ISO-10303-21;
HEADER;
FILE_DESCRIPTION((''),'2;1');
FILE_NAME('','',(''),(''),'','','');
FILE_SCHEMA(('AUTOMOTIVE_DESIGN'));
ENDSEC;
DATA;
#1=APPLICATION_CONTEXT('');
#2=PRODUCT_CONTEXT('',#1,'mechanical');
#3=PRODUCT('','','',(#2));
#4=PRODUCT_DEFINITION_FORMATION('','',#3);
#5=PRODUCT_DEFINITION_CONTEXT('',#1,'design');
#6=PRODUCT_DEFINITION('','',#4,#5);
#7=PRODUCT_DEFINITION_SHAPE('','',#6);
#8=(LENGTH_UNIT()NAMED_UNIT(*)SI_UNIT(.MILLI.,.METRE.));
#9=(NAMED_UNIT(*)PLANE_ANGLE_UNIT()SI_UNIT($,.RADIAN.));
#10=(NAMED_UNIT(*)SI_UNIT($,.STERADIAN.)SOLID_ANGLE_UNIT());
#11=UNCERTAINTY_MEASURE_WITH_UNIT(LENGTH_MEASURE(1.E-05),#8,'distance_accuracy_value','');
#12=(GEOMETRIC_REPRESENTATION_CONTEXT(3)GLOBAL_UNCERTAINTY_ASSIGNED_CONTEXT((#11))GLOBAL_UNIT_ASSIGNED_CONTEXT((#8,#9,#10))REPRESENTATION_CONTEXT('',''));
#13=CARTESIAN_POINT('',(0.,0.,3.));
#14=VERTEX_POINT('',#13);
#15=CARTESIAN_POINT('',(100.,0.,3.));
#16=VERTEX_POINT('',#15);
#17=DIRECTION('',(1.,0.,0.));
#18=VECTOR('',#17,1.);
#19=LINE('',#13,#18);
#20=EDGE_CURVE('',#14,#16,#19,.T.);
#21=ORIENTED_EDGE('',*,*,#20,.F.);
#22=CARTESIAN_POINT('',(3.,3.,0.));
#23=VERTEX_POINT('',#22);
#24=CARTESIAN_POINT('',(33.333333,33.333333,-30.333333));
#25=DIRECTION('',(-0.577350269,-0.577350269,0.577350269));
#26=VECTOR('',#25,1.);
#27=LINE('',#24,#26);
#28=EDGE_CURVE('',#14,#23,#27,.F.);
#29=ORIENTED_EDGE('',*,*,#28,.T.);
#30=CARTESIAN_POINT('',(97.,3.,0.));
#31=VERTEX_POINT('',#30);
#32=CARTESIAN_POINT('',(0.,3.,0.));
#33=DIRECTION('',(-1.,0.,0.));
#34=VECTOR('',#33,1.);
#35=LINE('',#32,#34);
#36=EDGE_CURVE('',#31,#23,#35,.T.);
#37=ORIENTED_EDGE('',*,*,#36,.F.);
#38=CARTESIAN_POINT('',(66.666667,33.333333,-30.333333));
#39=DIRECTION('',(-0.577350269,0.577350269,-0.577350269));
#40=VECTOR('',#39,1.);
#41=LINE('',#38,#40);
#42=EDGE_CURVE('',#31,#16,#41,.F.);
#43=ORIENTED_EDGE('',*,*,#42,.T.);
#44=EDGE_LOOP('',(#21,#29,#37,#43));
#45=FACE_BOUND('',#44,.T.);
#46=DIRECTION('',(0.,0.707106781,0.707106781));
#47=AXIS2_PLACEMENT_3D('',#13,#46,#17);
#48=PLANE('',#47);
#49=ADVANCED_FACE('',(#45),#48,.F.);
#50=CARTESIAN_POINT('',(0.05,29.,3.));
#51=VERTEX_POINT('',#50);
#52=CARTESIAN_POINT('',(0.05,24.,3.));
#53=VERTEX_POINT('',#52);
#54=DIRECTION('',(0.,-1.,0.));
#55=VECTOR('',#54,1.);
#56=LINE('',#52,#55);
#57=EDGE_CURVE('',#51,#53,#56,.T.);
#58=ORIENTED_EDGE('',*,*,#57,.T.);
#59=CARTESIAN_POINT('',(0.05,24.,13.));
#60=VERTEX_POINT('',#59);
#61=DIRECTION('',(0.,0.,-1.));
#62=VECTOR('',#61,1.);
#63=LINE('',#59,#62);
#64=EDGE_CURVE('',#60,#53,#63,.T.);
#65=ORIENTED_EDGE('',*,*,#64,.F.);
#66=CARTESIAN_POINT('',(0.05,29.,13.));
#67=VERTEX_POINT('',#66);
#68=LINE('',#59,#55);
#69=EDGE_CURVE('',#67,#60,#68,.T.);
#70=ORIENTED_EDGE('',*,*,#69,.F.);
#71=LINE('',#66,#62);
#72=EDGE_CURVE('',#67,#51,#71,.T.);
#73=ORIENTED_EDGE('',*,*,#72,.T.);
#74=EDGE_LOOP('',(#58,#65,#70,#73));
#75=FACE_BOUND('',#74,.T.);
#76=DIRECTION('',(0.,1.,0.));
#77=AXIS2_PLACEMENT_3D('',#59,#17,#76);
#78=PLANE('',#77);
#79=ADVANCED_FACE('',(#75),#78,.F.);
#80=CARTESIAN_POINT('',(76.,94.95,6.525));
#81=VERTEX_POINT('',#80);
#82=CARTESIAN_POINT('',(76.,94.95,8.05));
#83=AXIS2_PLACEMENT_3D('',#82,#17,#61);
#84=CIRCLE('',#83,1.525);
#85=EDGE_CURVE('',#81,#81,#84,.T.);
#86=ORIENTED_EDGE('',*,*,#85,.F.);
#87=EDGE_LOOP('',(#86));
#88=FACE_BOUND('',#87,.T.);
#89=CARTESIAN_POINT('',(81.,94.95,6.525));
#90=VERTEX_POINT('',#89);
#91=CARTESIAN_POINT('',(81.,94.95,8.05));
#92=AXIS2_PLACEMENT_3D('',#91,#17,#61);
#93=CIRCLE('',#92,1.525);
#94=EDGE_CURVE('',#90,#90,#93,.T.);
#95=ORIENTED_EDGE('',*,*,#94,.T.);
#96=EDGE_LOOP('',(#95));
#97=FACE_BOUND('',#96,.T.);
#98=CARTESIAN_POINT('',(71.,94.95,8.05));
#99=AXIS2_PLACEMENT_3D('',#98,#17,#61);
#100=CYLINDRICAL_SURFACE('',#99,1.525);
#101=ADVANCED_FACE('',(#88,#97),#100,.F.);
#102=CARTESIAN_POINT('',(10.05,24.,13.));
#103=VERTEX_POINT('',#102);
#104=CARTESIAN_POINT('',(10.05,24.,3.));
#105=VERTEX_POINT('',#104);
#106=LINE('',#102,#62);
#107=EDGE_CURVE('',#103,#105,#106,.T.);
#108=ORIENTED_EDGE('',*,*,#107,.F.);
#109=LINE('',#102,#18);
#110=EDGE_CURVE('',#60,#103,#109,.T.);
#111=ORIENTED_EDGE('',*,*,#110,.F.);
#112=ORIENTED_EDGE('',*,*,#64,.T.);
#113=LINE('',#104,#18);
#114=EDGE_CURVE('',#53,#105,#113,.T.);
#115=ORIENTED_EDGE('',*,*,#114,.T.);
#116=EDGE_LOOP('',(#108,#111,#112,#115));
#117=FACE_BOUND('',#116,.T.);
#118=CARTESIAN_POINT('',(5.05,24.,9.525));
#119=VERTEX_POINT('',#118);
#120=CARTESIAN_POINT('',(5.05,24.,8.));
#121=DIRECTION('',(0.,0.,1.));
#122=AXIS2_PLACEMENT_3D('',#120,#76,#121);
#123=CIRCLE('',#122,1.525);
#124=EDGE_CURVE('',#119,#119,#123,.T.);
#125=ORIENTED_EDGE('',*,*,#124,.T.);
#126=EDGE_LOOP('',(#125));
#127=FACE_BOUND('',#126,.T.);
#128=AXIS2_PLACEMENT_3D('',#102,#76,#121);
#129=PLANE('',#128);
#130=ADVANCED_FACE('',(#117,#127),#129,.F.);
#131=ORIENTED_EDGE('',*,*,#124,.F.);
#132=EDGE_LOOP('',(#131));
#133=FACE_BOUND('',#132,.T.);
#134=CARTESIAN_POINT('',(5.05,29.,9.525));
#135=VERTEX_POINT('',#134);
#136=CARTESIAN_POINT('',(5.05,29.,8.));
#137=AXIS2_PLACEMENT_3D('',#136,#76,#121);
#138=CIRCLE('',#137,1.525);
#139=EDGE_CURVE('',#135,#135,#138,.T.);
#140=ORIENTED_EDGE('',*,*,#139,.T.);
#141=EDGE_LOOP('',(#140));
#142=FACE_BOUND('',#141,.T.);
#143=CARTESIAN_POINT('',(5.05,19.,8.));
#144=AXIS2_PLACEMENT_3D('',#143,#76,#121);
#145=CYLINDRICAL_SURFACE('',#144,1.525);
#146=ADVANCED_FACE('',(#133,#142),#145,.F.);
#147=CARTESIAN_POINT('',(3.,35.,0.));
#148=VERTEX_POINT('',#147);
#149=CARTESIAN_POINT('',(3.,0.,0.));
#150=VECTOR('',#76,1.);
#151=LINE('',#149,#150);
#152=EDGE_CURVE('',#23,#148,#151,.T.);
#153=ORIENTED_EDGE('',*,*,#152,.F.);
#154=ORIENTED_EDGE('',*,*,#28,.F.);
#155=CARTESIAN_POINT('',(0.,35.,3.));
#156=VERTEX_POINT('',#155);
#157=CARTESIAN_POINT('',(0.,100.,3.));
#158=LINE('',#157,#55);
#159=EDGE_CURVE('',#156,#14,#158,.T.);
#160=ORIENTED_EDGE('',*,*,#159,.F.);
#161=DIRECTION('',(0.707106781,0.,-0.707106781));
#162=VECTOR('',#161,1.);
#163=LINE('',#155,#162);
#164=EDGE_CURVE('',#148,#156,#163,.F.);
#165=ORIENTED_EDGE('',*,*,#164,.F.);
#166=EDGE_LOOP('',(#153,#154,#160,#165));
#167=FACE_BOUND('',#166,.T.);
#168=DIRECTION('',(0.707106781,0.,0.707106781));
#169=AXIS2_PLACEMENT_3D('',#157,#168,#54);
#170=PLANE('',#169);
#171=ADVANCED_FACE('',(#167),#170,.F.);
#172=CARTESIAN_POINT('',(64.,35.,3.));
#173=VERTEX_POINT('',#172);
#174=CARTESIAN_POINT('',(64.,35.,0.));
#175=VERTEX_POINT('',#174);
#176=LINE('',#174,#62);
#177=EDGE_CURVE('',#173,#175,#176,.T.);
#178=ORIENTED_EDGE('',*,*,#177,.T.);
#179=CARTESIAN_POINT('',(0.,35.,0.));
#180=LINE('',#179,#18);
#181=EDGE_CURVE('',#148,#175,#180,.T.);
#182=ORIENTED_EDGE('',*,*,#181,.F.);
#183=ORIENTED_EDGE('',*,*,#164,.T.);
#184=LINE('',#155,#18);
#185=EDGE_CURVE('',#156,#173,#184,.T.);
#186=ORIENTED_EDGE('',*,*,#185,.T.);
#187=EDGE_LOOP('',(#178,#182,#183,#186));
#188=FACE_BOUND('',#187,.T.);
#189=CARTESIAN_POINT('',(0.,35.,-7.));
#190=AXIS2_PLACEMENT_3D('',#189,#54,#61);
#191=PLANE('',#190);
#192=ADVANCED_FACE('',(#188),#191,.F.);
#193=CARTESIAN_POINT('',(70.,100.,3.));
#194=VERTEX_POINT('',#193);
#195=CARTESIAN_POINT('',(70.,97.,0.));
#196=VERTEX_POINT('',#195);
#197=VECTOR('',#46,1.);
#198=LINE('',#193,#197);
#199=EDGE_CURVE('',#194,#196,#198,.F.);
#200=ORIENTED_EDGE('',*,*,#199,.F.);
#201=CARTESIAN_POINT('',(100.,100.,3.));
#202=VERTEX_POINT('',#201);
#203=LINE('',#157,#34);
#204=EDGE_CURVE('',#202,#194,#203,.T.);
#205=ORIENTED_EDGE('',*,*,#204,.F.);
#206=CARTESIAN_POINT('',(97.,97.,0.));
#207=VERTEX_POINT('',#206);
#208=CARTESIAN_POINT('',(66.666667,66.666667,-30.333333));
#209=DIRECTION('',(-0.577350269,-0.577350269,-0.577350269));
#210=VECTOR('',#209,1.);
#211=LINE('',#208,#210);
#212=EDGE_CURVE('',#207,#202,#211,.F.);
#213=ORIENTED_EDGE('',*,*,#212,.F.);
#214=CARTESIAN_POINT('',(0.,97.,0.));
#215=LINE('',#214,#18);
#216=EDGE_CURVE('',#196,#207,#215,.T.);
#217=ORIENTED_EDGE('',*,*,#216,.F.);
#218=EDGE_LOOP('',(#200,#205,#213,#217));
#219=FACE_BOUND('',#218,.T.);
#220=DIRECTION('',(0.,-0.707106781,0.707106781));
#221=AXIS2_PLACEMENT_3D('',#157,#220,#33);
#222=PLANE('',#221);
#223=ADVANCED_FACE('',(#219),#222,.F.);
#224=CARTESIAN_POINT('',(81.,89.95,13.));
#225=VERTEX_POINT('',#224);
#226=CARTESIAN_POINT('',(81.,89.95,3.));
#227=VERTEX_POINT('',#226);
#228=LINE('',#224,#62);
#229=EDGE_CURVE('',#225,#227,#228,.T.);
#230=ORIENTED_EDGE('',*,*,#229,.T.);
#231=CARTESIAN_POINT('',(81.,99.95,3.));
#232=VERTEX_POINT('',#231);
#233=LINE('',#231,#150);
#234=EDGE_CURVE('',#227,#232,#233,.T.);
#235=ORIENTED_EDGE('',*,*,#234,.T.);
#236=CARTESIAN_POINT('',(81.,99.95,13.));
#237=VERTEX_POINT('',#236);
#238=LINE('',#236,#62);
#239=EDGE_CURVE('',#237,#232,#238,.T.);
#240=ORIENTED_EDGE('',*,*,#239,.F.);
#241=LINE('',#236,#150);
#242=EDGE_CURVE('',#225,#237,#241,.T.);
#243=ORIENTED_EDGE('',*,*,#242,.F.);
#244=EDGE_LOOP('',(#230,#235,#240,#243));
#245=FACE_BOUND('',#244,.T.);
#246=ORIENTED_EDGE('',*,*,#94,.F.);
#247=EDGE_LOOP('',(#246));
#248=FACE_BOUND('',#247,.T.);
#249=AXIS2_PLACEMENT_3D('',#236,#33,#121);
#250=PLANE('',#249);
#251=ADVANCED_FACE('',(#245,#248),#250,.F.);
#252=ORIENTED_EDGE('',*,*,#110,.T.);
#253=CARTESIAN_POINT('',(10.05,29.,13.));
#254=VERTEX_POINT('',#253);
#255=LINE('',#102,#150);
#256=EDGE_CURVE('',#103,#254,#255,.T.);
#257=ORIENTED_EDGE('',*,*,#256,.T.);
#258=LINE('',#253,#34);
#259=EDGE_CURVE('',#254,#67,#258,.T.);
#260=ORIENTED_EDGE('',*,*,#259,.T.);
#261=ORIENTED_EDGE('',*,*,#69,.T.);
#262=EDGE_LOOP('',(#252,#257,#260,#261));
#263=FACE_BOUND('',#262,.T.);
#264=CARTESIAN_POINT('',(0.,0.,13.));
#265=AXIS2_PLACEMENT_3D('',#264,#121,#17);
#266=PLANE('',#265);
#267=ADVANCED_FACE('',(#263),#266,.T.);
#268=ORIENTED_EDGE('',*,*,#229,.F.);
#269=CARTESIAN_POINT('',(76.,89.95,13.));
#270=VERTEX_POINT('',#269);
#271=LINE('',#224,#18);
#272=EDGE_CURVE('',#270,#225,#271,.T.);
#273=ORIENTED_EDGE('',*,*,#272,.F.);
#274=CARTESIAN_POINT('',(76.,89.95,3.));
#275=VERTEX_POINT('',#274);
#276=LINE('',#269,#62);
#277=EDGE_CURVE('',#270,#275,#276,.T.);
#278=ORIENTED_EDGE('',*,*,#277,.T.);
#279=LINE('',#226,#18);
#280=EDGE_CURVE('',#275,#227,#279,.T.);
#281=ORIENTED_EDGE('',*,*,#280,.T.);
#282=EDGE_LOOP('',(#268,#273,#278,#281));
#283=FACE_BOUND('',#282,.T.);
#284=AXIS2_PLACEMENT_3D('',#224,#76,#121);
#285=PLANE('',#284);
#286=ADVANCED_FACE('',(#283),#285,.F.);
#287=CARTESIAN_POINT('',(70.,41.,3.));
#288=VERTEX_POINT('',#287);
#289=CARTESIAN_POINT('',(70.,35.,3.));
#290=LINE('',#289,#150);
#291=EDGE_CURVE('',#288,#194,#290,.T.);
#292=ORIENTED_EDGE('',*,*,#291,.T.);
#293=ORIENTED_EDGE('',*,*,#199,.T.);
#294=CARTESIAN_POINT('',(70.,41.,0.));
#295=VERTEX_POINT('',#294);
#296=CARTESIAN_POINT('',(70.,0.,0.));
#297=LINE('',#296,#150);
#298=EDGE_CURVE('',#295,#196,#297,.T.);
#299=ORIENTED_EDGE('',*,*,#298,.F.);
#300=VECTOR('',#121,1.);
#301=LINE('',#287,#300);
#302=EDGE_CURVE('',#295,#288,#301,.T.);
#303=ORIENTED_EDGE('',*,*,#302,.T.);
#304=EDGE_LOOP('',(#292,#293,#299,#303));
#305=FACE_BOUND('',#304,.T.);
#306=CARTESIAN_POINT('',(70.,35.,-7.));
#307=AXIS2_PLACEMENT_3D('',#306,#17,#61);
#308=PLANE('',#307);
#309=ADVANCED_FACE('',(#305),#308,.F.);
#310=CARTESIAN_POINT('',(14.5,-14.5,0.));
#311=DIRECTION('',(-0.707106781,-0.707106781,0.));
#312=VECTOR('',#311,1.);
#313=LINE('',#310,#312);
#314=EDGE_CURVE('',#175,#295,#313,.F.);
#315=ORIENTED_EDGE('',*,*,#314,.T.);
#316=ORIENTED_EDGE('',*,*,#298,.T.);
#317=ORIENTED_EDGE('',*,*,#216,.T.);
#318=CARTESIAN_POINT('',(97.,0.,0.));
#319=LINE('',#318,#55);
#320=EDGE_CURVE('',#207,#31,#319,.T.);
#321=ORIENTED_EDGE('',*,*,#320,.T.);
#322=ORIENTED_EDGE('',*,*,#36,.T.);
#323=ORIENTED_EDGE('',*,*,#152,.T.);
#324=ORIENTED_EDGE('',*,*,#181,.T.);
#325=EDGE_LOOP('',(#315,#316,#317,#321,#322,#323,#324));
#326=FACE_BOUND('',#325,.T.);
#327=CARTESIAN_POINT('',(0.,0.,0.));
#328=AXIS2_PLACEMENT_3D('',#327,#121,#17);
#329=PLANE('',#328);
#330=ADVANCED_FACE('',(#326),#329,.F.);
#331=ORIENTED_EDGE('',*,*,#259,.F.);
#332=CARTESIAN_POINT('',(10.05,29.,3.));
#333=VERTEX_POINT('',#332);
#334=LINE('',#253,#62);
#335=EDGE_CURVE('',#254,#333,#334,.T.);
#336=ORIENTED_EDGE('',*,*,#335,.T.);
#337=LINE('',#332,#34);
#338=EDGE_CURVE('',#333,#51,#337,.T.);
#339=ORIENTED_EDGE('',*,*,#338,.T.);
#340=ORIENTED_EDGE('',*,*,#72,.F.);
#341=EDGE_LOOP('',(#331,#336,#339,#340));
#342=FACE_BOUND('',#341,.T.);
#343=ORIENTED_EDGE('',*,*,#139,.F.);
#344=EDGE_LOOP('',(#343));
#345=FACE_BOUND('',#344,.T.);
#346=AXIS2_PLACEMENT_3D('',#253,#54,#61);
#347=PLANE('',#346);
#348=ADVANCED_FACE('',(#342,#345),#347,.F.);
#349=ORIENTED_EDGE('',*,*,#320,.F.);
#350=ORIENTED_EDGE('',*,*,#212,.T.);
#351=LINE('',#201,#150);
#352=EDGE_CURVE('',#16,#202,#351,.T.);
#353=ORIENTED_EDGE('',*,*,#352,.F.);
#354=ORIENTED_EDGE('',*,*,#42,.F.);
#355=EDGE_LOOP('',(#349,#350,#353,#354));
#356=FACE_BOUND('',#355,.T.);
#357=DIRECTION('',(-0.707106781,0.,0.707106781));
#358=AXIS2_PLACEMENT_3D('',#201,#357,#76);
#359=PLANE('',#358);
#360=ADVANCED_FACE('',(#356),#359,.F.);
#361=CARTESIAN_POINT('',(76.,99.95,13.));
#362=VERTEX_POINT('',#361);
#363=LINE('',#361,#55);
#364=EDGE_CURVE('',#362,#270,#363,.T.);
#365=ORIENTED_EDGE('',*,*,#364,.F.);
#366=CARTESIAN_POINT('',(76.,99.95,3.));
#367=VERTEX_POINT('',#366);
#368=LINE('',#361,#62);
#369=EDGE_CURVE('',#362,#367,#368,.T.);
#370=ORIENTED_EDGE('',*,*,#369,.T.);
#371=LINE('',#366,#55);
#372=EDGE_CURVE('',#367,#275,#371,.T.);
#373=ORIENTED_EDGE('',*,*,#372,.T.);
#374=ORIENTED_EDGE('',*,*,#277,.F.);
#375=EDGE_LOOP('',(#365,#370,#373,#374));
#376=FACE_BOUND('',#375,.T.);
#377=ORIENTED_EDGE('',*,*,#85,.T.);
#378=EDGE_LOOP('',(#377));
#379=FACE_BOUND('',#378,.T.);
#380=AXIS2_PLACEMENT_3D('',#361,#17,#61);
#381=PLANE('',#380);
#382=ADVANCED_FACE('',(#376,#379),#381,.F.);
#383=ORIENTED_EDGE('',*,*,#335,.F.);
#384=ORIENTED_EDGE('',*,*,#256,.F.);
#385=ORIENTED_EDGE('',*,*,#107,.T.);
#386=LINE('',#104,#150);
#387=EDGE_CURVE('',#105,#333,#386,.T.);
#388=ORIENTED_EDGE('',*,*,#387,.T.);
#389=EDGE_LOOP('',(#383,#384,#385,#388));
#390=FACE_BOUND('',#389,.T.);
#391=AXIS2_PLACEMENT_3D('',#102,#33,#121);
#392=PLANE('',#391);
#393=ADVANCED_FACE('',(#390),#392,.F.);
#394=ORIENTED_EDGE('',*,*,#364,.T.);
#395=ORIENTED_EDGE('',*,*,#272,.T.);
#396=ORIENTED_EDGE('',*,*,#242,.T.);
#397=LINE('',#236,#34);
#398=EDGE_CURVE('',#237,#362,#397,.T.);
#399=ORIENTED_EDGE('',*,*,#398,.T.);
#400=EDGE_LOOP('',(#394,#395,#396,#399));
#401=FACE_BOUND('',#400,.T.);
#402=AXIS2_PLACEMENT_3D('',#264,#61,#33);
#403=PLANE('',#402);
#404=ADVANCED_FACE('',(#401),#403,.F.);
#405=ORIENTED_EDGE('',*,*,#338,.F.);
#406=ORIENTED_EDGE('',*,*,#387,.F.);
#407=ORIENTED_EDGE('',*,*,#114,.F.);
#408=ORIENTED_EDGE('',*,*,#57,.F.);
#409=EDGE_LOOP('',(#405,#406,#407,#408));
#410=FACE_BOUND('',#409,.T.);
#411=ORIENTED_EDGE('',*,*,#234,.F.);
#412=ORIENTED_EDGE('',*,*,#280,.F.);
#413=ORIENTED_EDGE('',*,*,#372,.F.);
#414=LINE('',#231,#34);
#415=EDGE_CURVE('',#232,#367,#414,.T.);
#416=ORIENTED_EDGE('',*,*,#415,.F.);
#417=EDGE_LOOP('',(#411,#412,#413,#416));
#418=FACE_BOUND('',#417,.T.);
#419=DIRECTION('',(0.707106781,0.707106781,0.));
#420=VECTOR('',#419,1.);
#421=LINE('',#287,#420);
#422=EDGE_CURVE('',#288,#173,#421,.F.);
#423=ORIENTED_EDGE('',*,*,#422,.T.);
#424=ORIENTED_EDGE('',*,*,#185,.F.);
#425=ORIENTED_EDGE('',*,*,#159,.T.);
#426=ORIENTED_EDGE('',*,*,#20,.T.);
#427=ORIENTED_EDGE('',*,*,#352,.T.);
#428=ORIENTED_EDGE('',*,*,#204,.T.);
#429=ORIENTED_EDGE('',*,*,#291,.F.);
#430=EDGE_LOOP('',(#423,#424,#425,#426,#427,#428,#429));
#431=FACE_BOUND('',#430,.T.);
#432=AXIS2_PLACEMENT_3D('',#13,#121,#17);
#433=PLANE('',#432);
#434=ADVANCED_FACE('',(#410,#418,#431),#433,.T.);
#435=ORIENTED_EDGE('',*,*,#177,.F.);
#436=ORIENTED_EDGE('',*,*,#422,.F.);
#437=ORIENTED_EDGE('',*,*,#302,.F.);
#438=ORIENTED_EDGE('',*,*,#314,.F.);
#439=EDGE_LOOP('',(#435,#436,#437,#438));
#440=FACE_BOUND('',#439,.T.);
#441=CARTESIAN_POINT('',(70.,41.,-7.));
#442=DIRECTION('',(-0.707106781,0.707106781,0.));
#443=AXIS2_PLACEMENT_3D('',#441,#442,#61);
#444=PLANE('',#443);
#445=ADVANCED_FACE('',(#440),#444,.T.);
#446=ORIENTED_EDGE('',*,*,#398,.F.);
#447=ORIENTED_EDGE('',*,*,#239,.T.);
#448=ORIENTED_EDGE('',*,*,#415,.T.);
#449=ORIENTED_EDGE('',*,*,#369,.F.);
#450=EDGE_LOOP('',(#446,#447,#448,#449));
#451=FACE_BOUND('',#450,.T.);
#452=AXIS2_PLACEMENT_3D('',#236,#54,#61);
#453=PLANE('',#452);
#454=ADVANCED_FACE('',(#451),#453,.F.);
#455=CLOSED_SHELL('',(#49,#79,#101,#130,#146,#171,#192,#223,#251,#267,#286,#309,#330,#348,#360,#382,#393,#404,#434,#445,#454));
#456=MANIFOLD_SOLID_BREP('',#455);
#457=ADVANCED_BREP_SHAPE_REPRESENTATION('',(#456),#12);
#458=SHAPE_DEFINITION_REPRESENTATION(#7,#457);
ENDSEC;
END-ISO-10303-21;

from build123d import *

# Parameters (mm, degrees)
ESQUISSE1_W             = 100
ESQUISSE1_H             = 100
BOSS_EXTRU_1_DEPTH      = 3
CHANFREIN2_SIZE         = 3
ESQUISSE4_W             = 5
ESQUISSE4_H             = 10
ESQUISSE4_W_2           = 10
ESQUISSE4_H_2           = 5
BOSS_EXTRU_3_DEPTH      = 10
ESQUISSE5_R             = 1.525
ENL_V_MAT_EXTRU_2_DEPTH = 10
ESQUISSE6_R             = 1.525
ENL_V_MAT_EXTRU_3_DEPTH = 10
ESQUISSE7_W             = 70
ESQUISSE7_H             = 65
ENL_V_MAT_EXTRU_4_DEPTH = 10
CHANFREIN3_SIZE         = 6


with BuildPart() as part:
    # Esquisse1 → Boss.-Extru.1 (new body)
    with BuildSketch(Plane.XY):
        with Locations((50, 50)):
            Rectangle(ESQUISSE1_W, ESQUISSE1_H)
    extrude(amount=BOSS_EXTRU_1_DEPTH)

    # Chanfrein2
    chanfrein2_edges = [part.edges().sort_by_distance(p)[0] for p in [
        (50, 0, 0),
        (100, 50, 0),
        (50, 100, 0),
        (0, 50, 0),
    ]]
    chamfer(chanfrein2_edges, length=CHANFREIN2_SIZE - 0.0001)  # a hair under: the kernel refuses the full size

    # Esquisse4 → Boss.-Extru.3 (add)
    with BuildSketch(Plane.XY.offset(3)):
        with Locations((78.5, 94.95)):
            Rectangle(ESQUISSE4_W, ESQUISSE4_H)
        with Locations((5.05, 26.5)):
            Rectangle(ESQUISSE4_W_2, ESQUISSE4_H_2)
    extrude(amount=BOSS_EXTRU_3_DEPTH)

    # Esquisse5 → Enlèv. mat.-Extru.2 (cut)
    with BuildSketch(Plane(origin=(81, 0, 0), x_dir=(0, 0, -1), z_dir=(1, 0, 0))):
        with Locations((-8.05, 94.95)):
            Circle(ESQUISSE5_R)
    extrude(amount=-ENL_V_MAT_EXTRU_2_DEPTH, mode=Mode.SUBTRACT)

    # Esquisse6 → Enlèv. mat.-Extru.3 (cut)
    with BuildSketch(Plane(origin=(0, 29, 0), x_dir=(1, 0, 0), z_dir=(0, 1, 0))):
        with Locations(Location((5.05, -8, 0), (0, 0, 270))):
            Circle(ESQUISSE6_R)
    extrude(amount=-ENL_V_MAT_EXTRU_3_DEPTH, mode=Mode.SUBTRACT)

    # Esquisse7 → Enlèv. mat.-Extru.4 (cut)
    with BuildSketch(Plane.XY.offset(3)):
        with Locations((35, 67.5)):
            Rectangle(ESQUISSE7_W, ESQUISSE7_H)
    extrude(amount=-ENL_V_MAT_EXTRU_4_DEPTH, mode=Mode.SUBTRACT)

    # Chanfrein3
    chanfrein3_edges = [part.edges().sort_by_distance(p)[0] for p in [
        (70, 35, 1.5),
    ]]
    chamfer(chanfrein3_edges, length=CHANFREIN3_SIZE)


solid = part.part
